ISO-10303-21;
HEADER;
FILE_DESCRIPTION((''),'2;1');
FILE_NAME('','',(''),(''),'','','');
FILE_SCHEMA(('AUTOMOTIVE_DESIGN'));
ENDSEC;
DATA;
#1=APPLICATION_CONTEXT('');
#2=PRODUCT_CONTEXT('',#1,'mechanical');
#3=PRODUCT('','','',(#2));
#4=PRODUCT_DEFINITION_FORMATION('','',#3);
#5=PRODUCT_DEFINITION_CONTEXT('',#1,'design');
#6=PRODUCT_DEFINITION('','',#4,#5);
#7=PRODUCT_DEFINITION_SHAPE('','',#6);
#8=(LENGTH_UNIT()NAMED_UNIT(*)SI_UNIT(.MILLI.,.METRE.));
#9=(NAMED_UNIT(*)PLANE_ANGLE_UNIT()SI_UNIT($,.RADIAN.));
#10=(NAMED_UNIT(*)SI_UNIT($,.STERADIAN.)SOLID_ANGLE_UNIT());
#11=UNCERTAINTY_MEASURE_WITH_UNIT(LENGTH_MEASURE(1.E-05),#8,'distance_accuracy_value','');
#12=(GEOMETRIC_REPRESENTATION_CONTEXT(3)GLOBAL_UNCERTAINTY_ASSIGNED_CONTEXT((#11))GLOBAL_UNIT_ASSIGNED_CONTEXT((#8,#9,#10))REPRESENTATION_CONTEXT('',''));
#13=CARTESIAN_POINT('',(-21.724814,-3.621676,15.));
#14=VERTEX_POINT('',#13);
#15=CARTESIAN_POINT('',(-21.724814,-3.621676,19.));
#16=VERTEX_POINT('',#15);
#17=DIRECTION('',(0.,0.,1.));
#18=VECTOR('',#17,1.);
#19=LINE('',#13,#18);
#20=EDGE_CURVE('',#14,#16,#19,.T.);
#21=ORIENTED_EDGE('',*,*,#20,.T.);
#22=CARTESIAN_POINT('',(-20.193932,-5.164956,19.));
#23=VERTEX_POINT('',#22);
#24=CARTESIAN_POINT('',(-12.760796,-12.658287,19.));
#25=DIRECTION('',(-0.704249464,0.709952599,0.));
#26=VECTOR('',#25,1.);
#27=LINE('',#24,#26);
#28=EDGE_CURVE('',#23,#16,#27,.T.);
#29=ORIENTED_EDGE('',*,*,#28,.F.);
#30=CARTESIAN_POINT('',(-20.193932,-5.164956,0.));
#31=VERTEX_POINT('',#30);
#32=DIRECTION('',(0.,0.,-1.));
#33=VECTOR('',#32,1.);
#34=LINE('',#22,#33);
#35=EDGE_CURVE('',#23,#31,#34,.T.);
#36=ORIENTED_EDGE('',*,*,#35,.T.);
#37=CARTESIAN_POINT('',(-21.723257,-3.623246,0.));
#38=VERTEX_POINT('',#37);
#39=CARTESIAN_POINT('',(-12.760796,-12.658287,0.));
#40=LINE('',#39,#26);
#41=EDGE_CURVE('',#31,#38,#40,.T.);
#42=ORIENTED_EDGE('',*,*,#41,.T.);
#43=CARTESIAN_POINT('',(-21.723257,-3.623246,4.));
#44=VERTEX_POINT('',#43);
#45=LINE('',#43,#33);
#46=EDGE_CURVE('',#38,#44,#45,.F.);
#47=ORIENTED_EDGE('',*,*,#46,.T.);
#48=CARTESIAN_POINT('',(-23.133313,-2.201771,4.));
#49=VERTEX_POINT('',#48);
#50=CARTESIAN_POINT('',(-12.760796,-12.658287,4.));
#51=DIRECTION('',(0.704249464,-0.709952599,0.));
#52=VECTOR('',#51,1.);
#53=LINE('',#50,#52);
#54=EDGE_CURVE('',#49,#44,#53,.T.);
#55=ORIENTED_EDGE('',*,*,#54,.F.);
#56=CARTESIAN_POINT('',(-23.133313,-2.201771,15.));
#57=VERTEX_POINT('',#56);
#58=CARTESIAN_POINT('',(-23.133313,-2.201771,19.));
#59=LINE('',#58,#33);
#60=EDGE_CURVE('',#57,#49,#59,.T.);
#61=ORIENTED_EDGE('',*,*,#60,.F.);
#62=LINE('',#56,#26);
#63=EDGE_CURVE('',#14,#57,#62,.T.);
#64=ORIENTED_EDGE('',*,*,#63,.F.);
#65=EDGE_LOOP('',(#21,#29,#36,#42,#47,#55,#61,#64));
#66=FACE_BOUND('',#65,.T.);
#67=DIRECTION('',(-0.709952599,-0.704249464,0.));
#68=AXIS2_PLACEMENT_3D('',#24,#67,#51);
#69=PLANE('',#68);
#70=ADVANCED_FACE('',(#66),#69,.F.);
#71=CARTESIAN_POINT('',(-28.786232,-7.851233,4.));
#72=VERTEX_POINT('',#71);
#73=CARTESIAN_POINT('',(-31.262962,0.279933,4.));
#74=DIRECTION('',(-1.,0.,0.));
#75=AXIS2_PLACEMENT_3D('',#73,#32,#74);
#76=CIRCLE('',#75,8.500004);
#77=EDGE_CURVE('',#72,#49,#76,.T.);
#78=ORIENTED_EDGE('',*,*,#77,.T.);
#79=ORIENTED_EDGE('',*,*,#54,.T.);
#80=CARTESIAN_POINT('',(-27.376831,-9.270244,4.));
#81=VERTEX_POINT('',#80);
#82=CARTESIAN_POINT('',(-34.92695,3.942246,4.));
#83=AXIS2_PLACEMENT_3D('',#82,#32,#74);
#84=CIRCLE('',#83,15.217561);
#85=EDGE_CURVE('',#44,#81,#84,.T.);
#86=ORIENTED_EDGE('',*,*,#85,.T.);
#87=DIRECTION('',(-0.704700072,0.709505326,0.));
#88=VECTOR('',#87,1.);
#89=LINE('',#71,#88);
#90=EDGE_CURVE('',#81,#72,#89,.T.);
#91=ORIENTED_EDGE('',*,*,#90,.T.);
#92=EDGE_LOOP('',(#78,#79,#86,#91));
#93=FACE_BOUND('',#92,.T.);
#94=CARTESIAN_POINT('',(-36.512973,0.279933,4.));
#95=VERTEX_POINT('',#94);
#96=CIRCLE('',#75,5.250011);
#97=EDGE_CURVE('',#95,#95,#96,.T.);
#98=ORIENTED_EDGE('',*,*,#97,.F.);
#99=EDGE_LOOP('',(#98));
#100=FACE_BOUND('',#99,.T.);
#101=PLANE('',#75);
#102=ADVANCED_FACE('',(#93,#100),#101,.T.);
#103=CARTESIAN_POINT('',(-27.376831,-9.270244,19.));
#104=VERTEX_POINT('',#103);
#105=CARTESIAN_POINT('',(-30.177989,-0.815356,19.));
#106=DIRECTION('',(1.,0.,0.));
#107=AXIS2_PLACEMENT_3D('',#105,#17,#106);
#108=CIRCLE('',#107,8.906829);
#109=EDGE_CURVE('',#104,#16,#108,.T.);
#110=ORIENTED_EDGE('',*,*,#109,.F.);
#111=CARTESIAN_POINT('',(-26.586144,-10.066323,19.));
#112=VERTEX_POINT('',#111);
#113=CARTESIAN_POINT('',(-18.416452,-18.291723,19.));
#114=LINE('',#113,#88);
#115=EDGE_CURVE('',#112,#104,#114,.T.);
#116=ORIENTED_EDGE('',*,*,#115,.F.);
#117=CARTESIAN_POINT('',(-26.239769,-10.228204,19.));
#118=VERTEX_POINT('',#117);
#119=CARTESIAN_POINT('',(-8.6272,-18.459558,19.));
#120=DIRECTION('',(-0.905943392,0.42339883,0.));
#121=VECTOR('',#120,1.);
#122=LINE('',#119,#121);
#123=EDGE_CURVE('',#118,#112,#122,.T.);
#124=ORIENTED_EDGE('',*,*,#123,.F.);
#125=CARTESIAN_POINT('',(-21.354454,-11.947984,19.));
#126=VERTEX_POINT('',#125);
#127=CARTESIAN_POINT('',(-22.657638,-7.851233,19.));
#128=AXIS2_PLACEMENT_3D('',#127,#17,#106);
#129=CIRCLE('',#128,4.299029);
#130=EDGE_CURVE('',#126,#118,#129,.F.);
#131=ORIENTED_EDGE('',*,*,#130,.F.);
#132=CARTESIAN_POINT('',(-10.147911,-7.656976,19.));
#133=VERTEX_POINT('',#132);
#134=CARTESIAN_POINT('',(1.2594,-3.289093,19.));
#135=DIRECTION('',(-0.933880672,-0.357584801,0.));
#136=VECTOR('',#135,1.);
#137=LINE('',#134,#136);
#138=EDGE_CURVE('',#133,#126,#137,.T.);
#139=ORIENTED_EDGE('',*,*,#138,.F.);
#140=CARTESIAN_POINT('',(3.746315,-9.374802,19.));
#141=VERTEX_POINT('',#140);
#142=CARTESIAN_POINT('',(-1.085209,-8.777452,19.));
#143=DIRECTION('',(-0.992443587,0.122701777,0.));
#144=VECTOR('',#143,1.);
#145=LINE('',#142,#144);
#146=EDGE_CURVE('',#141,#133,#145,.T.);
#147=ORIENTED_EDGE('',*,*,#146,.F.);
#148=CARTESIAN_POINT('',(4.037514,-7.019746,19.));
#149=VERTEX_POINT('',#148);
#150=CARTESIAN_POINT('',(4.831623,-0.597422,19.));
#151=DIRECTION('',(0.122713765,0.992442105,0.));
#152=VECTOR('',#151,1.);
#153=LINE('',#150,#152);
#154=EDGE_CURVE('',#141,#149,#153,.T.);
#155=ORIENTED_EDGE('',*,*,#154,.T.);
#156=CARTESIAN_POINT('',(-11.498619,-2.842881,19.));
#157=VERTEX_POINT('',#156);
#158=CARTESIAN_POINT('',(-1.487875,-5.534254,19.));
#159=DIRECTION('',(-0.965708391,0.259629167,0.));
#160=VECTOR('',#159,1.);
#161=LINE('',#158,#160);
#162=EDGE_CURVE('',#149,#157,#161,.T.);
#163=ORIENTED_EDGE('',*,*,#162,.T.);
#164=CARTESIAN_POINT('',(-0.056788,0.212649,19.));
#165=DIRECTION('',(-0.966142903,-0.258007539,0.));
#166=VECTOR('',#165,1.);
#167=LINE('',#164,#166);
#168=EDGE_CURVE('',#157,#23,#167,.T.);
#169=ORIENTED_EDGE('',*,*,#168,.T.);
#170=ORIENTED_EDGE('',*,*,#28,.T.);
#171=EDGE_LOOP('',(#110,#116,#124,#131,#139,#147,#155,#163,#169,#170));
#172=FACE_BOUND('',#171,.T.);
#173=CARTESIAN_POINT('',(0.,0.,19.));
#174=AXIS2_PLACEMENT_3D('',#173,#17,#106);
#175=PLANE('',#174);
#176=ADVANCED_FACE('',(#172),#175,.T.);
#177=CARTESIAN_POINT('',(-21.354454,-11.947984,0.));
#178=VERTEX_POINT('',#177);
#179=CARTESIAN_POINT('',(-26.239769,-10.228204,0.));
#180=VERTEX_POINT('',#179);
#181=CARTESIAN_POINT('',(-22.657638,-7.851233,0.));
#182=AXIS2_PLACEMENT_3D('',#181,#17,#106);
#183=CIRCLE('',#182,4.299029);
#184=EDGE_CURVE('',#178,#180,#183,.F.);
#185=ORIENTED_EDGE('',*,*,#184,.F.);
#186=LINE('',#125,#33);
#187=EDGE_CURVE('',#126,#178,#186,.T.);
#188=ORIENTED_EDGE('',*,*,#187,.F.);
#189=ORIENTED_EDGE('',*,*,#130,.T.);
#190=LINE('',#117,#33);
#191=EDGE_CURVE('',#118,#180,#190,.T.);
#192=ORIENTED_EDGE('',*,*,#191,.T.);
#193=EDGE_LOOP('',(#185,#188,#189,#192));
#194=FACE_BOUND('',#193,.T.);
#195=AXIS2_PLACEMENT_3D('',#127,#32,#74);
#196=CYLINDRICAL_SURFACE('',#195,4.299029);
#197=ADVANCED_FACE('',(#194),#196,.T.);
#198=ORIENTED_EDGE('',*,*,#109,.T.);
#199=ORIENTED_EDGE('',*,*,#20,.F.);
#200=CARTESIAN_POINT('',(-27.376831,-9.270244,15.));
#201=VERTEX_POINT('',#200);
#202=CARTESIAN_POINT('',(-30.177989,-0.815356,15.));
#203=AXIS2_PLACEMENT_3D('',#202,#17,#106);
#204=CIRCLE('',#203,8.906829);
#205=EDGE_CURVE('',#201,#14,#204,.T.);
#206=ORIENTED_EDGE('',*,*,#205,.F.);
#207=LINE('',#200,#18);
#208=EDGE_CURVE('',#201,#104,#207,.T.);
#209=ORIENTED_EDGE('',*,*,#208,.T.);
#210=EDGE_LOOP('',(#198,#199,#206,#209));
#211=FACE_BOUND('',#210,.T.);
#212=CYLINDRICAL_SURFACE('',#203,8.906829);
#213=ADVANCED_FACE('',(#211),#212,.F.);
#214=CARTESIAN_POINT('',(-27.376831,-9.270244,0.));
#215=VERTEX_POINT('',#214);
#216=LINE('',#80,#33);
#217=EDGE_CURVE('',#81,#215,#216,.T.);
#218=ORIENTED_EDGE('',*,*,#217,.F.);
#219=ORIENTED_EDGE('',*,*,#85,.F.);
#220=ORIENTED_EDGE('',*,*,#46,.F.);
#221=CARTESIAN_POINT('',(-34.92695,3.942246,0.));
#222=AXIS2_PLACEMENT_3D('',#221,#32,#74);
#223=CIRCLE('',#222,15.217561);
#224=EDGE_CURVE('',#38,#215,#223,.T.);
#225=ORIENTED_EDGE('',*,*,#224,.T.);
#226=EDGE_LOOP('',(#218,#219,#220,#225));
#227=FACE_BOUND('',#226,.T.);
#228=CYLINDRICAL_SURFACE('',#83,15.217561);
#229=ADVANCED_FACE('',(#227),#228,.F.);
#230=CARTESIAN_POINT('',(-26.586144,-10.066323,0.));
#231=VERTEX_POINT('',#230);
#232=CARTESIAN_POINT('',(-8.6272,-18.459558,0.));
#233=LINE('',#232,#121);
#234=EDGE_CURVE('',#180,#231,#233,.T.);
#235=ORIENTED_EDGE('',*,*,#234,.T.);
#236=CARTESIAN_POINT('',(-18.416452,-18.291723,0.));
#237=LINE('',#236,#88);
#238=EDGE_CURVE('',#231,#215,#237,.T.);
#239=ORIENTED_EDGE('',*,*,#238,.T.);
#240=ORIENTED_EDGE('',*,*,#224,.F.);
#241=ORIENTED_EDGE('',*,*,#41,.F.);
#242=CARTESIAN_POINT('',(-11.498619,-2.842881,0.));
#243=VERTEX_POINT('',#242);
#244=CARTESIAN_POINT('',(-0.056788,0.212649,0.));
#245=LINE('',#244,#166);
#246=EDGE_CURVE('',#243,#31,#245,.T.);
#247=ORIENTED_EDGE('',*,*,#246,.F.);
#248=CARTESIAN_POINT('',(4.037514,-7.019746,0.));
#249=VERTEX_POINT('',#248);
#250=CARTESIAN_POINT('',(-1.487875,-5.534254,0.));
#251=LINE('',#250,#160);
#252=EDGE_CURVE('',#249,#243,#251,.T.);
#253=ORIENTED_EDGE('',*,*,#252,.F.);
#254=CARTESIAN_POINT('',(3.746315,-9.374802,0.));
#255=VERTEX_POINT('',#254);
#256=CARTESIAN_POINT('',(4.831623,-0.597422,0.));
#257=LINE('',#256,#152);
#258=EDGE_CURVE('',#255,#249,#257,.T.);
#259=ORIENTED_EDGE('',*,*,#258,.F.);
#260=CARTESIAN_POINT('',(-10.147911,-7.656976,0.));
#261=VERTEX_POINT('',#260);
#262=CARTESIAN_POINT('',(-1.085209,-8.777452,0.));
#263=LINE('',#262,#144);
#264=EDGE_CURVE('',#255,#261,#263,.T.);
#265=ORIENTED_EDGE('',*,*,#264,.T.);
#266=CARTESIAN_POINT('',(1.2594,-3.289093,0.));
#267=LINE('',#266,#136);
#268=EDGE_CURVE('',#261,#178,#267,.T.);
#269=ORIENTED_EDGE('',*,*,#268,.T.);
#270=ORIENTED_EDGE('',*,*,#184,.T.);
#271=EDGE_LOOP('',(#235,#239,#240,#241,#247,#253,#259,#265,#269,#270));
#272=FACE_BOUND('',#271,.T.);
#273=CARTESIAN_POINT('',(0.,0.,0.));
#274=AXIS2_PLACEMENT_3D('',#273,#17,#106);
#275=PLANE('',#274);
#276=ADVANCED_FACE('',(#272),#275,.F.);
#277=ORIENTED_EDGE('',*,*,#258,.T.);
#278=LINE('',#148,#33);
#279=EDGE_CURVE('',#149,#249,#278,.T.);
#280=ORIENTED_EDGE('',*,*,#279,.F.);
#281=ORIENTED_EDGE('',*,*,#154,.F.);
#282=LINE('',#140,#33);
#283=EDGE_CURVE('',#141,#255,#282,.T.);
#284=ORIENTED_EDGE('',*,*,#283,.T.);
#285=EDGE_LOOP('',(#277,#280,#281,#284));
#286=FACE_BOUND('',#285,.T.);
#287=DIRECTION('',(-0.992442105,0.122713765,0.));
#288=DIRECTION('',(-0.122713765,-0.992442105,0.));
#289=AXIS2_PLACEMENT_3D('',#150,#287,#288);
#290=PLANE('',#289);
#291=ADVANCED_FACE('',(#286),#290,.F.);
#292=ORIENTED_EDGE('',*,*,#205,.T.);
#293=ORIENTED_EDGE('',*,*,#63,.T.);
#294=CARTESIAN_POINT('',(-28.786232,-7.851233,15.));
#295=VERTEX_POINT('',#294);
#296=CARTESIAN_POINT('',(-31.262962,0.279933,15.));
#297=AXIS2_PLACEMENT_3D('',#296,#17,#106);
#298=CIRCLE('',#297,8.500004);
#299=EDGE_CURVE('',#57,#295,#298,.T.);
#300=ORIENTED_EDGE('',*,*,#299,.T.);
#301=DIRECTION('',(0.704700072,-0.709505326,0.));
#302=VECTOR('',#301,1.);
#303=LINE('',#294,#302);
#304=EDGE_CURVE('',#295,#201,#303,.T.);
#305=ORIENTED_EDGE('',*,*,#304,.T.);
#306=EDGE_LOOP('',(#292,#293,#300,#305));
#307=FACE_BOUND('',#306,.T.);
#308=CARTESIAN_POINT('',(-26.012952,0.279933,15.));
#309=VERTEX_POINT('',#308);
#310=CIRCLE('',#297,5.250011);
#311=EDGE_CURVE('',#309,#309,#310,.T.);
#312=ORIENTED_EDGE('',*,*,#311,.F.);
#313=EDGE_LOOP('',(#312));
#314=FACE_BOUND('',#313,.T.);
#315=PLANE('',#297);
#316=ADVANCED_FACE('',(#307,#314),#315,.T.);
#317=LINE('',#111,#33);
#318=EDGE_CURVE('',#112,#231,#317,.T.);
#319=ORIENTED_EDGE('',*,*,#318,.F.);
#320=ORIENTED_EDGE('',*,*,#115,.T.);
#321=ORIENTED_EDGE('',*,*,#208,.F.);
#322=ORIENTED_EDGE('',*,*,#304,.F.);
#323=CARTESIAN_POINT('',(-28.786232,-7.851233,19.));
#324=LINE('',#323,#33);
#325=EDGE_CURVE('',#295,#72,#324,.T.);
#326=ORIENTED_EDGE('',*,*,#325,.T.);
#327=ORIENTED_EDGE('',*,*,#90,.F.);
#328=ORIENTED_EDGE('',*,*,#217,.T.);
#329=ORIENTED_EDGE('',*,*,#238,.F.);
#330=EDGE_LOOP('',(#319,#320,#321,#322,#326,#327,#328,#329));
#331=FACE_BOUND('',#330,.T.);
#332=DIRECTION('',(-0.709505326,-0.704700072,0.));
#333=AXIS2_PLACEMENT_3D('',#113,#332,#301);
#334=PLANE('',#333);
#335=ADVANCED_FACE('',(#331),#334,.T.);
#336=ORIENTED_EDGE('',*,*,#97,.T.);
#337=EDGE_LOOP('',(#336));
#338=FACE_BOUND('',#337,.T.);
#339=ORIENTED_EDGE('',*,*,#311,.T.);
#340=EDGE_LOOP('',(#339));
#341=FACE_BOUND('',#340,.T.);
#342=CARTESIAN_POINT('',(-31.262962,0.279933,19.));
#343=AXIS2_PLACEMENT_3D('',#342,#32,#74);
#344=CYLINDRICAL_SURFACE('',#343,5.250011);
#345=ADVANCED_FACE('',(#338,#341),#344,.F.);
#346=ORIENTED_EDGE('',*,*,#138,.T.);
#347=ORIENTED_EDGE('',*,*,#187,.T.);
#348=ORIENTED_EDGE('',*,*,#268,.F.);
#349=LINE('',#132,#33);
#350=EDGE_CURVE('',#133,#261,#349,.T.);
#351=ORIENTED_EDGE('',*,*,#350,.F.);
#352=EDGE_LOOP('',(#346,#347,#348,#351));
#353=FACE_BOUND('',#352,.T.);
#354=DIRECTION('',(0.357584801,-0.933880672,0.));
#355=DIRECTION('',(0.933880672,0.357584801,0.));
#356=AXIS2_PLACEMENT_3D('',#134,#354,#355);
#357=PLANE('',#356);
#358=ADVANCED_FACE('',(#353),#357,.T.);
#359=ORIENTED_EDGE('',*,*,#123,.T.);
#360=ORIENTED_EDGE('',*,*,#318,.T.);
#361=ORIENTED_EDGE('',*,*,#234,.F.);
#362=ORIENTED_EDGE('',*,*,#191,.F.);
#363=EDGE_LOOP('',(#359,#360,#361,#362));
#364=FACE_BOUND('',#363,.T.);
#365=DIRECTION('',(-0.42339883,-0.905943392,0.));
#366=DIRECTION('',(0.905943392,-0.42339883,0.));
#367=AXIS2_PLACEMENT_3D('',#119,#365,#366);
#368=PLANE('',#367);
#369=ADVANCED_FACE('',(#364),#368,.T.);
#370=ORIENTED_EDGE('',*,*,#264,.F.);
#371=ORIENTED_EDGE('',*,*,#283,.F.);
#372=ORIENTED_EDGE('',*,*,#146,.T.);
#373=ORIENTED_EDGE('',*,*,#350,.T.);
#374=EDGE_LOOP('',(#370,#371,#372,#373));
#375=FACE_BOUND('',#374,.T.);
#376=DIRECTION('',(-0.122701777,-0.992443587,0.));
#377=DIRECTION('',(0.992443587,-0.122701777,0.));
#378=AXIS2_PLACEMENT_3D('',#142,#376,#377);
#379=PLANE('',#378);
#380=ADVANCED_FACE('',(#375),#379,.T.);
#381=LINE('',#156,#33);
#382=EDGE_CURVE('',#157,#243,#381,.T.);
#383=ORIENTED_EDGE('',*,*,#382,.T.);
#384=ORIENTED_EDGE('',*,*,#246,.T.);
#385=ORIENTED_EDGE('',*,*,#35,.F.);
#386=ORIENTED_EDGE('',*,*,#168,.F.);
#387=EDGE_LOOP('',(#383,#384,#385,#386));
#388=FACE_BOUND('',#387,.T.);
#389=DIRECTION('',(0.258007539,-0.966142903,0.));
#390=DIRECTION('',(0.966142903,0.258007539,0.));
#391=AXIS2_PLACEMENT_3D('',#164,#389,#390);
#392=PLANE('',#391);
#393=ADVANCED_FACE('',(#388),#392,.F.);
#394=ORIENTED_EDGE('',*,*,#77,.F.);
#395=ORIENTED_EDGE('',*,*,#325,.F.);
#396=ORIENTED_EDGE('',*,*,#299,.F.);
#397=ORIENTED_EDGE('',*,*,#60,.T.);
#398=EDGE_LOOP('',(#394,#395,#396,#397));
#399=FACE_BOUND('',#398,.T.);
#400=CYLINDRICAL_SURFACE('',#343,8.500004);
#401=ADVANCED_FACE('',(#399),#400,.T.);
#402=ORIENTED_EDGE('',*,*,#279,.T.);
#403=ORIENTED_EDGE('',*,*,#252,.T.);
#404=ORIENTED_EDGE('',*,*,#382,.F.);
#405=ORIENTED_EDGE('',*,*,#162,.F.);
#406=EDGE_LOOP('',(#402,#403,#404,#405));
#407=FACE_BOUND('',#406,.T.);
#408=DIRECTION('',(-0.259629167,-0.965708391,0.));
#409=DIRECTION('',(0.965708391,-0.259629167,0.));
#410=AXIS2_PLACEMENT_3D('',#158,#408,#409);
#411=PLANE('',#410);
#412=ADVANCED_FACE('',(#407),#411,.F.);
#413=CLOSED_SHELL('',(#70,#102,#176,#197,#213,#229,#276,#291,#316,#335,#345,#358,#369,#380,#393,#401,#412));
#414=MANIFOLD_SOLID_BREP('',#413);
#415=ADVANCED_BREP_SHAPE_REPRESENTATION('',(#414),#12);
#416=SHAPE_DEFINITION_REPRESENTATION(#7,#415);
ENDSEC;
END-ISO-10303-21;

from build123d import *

# Parameters (mm, degrees)
BOSS_EXTRUDE1_OUTLINE_R = 5.250010824
BOSS_EXTRUDE1_DEPTH     = 19
CUT_EXTRUDE1_START      = -4
SKETCH2_R               = 8.500003527
CUT_EXTRUDE1_DEPTH      = 4
SKETCH3_R               = 8.500003527
CUT_EXTRUDE2_DEPTH      = 4
CUT_EXTRUDE3_START      = -4
CUT_EXTRUDE3_DEPTH      = 4
CUT_EXTRUDE4_DEPTH      = 4


# Read off the part's stored shape, not the designer's step: Boss-Extrude1
with BuildPart() as part:
    # Boss-Extrude1 outline → Boss-Extrude1 (new body)
    with BuildSketch(Plane.XY):
        with BuildLine():
            ThreePointArc((-23.133312794, -2.201771211), (-37.271533994, 6.292181292), (-28.786231545, -7.851233083))
            Line((-28.786231545, -7.851233083), (-26.586143602, -10.066323126))
            Line((-26.586143602, -10.066323126), (-26.23976909, -10.228203619))
            ThreePointArc((-26.23976909, -10.228203619), (-24.085157131, -11.906333766), (-21.354454149, -11.947983588))
            Line((-21.354454149, -11.947983588), (-10.14791118, -7.656975592))
            Line((-10.14791118, -7.656975592), (3.746314894, -9.374802435))
            Line((3.746314894, -9.374802435), (4.037513624, -7.019745673))
            Line((4.037513624, -7.019745673), (-11.498619188, -2.842881049))
            Line((-11.498619188, -2.842881049), (-20.193931688, -5.164955939))
            Line((-20.193931688, -5.164955939), (-23.133312794, -2.201771211))
        make_face()
        with Locations((-31.26296245, 0.27993313)):
            Circle(BOSS_EXTRUDE1_OUTLINE_R, mode=Mode.SUBTRACT)
    extrude(amount=BOSS_EXTRUDE1_DEPTH)

    # Sketch2 → Cut-Extrude1 (cut)
    with BuildSketch(Plane.XY.offset(19).offset(CUT_EXTRUDE1_START)):
        with Locations((-31.26296245, 0.27993313)):
            Circle(SKETCH2_R)
    extrude(amount=CUT_EXTRUDE1_DEPTH, mode=Mode.SUBTRACT)

    # Sketch3 → Cut-Extrude2 (cut)
    with BuildSketch(Plane(origin=(0, 0, 0), x_dir=(-1, 0, 0), z_dir=(0, 0, -1))):
        with Locations((31.26296245, 0.27993313)):
            Circle(SKETCH3_R)
    extrude(amount=-CUT_EXTRUDE2_DEPTH, mode=Mode.SUBTRACT)

    # Sketch4 → Cut-Extrude3 (cut)
    with BuildSketch(Plane.XY.offset(19).offset(CUT_EXTRUDE3_START)):
        with BuildLine():
            Line((-28.786231545, -7.851233083), (-27.3768314, -9.270243736))
            ThreePointArc((-27.3768314, -9.270243736), (-23.881833101, -7.115358231), (-21.724813867, -3.621676409))
            Line((-21.724813867, -3.621676409), (-23.133312794, -2.201771211))
            ThreePointArc((-23.133312794, -2.201771211), (-25.254390905, -5.732315031), (-28.786231545, -7.851233083))
        make_face()
    extrude(amount=CUT_EXTRUDE3_DEPTH, mode=Mode.SUBTRACT)

    # Sketch5 → Cut-Extrude4 (cut)
    with BuildSketch(Plane(origin=(0, 0, 0), x_dir=(-1, 0, 0), z_dir=(0, 0, -1))):
        with BuildLine():
            Line((23.133312794, -2.201771211), (21.719099232, -3.615984773))
            ThreePointArc((21.719099232, -3.615984773), (24.169813566, -6.821498289), (27.3768314, -9.270243736))
            Line((27.3768314, -9.270243736), (28.786231545, -7.851233083))
            ThreePointArc((28.786231545, -7.851233083), (25.254390905, -5.732315031), (23.133312794, -2.201771211))
        make_face()
    extrude(amount=-CUT_EXTRUDE4_DEPTH, mode=Mode.SUBTRACT)


solid = part.part
